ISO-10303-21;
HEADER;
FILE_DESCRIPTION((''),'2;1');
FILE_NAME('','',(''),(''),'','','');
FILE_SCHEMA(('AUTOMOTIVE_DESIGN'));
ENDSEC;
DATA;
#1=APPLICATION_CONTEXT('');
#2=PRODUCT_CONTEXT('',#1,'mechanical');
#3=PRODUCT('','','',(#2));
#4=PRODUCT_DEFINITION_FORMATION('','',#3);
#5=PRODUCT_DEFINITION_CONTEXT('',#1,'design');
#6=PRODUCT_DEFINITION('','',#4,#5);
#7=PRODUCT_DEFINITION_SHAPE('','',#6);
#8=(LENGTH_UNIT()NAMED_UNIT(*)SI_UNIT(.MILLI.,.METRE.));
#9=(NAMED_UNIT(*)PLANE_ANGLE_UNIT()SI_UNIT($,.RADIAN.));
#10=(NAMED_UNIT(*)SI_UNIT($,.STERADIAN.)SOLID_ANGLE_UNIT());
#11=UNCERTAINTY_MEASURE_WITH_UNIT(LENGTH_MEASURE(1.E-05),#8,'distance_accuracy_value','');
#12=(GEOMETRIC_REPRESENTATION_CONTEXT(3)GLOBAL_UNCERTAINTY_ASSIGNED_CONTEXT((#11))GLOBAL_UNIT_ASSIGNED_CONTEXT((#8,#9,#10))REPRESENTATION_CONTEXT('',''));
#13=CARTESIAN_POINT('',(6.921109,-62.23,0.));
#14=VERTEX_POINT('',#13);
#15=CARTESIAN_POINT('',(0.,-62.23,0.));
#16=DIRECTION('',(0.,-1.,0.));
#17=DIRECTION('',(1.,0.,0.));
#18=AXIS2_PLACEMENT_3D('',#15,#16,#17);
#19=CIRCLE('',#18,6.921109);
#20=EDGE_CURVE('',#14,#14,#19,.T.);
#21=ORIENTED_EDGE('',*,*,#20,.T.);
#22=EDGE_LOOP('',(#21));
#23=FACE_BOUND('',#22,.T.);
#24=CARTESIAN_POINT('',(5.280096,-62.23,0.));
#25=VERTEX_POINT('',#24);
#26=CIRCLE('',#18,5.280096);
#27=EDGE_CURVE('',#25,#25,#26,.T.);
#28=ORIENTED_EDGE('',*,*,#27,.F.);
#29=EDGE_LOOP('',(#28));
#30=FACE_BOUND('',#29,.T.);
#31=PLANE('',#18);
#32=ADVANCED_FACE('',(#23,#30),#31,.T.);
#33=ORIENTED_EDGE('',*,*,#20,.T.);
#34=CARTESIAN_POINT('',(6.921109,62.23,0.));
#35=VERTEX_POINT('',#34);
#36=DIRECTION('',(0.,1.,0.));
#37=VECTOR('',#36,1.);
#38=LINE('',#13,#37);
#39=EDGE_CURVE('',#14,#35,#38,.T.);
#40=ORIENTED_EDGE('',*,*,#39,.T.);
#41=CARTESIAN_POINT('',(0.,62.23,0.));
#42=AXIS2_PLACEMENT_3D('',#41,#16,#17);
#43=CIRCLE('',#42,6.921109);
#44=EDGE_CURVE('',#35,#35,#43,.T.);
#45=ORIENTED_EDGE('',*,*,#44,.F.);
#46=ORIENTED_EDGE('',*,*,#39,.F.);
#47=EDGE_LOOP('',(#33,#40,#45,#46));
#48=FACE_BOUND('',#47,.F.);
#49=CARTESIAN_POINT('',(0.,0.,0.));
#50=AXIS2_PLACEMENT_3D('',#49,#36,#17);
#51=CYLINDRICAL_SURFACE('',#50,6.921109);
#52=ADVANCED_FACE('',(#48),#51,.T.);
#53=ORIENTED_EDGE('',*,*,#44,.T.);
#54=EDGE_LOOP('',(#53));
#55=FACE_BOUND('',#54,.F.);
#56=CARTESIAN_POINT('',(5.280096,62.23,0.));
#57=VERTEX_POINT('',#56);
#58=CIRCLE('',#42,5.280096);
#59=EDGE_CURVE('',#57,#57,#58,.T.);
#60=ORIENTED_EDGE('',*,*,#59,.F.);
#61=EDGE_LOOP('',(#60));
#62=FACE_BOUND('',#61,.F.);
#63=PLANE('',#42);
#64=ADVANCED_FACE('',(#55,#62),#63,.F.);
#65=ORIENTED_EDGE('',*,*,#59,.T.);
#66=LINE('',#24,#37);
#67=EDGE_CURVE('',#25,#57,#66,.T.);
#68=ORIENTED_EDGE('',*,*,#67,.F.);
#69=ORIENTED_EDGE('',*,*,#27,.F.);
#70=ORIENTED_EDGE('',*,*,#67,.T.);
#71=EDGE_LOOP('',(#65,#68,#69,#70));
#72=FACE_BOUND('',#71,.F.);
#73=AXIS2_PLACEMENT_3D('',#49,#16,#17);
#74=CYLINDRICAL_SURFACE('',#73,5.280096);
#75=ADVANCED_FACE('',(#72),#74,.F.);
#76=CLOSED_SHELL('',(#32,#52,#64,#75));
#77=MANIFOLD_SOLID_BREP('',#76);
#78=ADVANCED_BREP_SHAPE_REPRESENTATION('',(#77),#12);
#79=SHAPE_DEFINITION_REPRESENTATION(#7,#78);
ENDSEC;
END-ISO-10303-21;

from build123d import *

# Parameters (mm, degrees)
F0_R          = 6.9211089712
F0_R_2        = 5.2800956232
F1_DEPTH      = 62.23
F1_DEPTH_BACK = 62.23
F4_DEPTH      = 25.4


# Not quite as in the source:
# - the program builds the solid bodies; features that only make, move or delete a surface that nothing else refers to are left out


with BuildPart() as f1:
    # F0 (on Front) → F1 (new body, two sides)
    with BuildSketch(Plane.XZ) as f1_sk:
        Circle(F0_R)
        Circle(F0_R_2, mode=Mode.SUBTRACT)
    extrude(amount=F1_DEPTH)
    extrude(f1_sk.sketch, amount=-F1_DEPTH_BACK)

    # F0 (on Front) → F4 (join)
    with BuildSketch(Plane.XZ):
        Circle(F0_R)
        Circle(F0_R_2, mode=Mode.SUBTRACT)
    extrude(amount=F4_DEPTH)


solid = f1.part
